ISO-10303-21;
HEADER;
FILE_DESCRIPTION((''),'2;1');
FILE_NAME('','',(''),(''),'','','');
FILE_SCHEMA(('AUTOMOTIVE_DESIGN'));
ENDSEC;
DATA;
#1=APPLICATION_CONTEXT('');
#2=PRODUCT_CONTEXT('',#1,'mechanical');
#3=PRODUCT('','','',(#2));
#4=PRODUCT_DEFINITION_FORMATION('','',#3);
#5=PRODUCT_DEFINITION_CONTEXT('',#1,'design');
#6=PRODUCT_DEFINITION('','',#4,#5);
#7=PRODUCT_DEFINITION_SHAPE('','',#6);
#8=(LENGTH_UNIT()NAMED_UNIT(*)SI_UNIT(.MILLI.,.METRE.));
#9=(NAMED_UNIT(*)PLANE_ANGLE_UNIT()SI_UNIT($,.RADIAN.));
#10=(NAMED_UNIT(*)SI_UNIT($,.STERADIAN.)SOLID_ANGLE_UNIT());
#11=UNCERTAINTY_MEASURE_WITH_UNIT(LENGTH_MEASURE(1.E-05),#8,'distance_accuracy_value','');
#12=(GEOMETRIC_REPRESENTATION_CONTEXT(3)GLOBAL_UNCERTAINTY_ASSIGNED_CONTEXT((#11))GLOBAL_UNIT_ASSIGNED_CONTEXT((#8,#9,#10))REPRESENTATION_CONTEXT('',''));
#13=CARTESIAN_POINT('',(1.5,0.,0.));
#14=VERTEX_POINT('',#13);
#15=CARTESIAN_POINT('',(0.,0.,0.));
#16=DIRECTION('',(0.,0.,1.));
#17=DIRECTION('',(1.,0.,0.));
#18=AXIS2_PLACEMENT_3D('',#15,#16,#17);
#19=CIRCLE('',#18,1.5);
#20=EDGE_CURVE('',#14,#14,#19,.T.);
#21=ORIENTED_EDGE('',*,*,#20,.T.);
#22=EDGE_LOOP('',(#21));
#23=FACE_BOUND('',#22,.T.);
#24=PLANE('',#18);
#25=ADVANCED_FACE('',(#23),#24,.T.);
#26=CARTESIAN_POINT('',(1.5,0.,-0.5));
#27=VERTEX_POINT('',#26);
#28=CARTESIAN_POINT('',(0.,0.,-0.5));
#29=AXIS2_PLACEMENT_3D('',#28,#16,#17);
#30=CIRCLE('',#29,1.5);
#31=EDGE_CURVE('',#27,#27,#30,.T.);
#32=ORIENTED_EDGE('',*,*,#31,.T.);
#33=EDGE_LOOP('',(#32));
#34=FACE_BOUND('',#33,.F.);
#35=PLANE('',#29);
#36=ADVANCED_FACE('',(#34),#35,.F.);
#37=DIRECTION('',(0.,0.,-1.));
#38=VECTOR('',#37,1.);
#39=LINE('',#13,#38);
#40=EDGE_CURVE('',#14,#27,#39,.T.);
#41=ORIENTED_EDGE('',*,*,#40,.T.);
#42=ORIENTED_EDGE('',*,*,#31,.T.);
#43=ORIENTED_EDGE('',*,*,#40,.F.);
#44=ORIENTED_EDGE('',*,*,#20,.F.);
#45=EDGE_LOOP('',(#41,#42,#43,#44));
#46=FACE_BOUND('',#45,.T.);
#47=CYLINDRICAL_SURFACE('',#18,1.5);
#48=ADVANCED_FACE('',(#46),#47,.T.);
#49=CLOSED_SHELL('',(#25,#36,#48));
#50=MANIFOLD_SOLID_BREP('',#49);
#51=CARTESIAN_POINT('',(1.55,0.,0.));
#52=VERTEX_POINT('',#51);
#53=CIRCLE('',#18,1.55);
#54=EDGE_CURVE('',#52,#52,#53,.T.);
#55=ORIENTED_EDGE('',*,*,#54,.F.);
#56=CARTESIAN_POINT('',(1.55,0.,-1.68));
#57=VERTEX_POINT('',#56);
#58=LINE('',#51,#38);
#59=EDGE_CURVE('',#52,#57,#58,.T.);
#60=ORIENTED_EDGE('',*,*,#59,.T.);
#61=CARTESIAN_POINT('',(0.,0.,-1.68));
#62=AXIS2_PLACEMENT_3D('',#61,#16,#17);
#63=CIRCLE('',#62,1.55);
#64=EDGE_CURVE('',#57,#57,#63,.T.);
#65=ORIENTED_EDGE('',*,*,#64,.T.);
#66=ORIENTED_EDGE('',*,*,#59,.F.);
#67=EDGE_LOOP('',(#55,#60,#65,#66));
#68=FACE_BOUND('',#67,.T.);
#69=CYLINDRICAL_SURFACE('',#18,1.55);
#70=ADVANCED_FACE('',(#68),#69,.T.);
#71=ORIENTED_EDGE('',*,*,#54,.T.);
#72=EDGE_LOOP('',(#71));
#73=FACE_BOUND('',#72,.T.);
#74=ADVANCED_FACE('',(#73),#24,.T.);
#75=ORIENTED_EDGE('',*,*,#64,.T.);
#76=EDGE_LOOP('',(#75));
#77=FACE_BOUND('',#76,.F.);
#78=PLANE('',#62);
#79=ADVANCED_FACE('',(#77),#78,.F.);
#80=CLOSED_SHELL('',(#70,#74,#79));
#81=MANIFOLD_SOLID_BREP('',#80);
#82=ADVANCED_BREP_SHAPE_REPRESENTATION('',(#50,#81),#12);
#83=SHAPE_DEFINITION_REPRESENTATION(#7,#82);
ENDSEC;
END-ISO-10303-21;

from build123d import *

# Parameters (mm, degrees)
F0_R     = 1.5
F3_DEPTH = 0.5
F4_R     = 1.55
F5_DEPTH = 1.68


# Not quite as in the source:
# - the program builds the solid bodies; features that only make, move or delete a surface that nothing else refers to are left out


with BuildPart() as f3:
    # F0 (on Top) → F3 (new body)
    with BuildSketch(Plane.XY):
        Circle(F0_R)
    extrude(amount=-F3_DEPTH)


with BuildPart() as f5:
    # F4 (on Top) → F5 (new body)
    with BuildSketch(Plane.XY):
        Circle(F4_R)
    extrude(amount=-F5_DEPTH)


solid = Compound([f3.part, f5.part])
